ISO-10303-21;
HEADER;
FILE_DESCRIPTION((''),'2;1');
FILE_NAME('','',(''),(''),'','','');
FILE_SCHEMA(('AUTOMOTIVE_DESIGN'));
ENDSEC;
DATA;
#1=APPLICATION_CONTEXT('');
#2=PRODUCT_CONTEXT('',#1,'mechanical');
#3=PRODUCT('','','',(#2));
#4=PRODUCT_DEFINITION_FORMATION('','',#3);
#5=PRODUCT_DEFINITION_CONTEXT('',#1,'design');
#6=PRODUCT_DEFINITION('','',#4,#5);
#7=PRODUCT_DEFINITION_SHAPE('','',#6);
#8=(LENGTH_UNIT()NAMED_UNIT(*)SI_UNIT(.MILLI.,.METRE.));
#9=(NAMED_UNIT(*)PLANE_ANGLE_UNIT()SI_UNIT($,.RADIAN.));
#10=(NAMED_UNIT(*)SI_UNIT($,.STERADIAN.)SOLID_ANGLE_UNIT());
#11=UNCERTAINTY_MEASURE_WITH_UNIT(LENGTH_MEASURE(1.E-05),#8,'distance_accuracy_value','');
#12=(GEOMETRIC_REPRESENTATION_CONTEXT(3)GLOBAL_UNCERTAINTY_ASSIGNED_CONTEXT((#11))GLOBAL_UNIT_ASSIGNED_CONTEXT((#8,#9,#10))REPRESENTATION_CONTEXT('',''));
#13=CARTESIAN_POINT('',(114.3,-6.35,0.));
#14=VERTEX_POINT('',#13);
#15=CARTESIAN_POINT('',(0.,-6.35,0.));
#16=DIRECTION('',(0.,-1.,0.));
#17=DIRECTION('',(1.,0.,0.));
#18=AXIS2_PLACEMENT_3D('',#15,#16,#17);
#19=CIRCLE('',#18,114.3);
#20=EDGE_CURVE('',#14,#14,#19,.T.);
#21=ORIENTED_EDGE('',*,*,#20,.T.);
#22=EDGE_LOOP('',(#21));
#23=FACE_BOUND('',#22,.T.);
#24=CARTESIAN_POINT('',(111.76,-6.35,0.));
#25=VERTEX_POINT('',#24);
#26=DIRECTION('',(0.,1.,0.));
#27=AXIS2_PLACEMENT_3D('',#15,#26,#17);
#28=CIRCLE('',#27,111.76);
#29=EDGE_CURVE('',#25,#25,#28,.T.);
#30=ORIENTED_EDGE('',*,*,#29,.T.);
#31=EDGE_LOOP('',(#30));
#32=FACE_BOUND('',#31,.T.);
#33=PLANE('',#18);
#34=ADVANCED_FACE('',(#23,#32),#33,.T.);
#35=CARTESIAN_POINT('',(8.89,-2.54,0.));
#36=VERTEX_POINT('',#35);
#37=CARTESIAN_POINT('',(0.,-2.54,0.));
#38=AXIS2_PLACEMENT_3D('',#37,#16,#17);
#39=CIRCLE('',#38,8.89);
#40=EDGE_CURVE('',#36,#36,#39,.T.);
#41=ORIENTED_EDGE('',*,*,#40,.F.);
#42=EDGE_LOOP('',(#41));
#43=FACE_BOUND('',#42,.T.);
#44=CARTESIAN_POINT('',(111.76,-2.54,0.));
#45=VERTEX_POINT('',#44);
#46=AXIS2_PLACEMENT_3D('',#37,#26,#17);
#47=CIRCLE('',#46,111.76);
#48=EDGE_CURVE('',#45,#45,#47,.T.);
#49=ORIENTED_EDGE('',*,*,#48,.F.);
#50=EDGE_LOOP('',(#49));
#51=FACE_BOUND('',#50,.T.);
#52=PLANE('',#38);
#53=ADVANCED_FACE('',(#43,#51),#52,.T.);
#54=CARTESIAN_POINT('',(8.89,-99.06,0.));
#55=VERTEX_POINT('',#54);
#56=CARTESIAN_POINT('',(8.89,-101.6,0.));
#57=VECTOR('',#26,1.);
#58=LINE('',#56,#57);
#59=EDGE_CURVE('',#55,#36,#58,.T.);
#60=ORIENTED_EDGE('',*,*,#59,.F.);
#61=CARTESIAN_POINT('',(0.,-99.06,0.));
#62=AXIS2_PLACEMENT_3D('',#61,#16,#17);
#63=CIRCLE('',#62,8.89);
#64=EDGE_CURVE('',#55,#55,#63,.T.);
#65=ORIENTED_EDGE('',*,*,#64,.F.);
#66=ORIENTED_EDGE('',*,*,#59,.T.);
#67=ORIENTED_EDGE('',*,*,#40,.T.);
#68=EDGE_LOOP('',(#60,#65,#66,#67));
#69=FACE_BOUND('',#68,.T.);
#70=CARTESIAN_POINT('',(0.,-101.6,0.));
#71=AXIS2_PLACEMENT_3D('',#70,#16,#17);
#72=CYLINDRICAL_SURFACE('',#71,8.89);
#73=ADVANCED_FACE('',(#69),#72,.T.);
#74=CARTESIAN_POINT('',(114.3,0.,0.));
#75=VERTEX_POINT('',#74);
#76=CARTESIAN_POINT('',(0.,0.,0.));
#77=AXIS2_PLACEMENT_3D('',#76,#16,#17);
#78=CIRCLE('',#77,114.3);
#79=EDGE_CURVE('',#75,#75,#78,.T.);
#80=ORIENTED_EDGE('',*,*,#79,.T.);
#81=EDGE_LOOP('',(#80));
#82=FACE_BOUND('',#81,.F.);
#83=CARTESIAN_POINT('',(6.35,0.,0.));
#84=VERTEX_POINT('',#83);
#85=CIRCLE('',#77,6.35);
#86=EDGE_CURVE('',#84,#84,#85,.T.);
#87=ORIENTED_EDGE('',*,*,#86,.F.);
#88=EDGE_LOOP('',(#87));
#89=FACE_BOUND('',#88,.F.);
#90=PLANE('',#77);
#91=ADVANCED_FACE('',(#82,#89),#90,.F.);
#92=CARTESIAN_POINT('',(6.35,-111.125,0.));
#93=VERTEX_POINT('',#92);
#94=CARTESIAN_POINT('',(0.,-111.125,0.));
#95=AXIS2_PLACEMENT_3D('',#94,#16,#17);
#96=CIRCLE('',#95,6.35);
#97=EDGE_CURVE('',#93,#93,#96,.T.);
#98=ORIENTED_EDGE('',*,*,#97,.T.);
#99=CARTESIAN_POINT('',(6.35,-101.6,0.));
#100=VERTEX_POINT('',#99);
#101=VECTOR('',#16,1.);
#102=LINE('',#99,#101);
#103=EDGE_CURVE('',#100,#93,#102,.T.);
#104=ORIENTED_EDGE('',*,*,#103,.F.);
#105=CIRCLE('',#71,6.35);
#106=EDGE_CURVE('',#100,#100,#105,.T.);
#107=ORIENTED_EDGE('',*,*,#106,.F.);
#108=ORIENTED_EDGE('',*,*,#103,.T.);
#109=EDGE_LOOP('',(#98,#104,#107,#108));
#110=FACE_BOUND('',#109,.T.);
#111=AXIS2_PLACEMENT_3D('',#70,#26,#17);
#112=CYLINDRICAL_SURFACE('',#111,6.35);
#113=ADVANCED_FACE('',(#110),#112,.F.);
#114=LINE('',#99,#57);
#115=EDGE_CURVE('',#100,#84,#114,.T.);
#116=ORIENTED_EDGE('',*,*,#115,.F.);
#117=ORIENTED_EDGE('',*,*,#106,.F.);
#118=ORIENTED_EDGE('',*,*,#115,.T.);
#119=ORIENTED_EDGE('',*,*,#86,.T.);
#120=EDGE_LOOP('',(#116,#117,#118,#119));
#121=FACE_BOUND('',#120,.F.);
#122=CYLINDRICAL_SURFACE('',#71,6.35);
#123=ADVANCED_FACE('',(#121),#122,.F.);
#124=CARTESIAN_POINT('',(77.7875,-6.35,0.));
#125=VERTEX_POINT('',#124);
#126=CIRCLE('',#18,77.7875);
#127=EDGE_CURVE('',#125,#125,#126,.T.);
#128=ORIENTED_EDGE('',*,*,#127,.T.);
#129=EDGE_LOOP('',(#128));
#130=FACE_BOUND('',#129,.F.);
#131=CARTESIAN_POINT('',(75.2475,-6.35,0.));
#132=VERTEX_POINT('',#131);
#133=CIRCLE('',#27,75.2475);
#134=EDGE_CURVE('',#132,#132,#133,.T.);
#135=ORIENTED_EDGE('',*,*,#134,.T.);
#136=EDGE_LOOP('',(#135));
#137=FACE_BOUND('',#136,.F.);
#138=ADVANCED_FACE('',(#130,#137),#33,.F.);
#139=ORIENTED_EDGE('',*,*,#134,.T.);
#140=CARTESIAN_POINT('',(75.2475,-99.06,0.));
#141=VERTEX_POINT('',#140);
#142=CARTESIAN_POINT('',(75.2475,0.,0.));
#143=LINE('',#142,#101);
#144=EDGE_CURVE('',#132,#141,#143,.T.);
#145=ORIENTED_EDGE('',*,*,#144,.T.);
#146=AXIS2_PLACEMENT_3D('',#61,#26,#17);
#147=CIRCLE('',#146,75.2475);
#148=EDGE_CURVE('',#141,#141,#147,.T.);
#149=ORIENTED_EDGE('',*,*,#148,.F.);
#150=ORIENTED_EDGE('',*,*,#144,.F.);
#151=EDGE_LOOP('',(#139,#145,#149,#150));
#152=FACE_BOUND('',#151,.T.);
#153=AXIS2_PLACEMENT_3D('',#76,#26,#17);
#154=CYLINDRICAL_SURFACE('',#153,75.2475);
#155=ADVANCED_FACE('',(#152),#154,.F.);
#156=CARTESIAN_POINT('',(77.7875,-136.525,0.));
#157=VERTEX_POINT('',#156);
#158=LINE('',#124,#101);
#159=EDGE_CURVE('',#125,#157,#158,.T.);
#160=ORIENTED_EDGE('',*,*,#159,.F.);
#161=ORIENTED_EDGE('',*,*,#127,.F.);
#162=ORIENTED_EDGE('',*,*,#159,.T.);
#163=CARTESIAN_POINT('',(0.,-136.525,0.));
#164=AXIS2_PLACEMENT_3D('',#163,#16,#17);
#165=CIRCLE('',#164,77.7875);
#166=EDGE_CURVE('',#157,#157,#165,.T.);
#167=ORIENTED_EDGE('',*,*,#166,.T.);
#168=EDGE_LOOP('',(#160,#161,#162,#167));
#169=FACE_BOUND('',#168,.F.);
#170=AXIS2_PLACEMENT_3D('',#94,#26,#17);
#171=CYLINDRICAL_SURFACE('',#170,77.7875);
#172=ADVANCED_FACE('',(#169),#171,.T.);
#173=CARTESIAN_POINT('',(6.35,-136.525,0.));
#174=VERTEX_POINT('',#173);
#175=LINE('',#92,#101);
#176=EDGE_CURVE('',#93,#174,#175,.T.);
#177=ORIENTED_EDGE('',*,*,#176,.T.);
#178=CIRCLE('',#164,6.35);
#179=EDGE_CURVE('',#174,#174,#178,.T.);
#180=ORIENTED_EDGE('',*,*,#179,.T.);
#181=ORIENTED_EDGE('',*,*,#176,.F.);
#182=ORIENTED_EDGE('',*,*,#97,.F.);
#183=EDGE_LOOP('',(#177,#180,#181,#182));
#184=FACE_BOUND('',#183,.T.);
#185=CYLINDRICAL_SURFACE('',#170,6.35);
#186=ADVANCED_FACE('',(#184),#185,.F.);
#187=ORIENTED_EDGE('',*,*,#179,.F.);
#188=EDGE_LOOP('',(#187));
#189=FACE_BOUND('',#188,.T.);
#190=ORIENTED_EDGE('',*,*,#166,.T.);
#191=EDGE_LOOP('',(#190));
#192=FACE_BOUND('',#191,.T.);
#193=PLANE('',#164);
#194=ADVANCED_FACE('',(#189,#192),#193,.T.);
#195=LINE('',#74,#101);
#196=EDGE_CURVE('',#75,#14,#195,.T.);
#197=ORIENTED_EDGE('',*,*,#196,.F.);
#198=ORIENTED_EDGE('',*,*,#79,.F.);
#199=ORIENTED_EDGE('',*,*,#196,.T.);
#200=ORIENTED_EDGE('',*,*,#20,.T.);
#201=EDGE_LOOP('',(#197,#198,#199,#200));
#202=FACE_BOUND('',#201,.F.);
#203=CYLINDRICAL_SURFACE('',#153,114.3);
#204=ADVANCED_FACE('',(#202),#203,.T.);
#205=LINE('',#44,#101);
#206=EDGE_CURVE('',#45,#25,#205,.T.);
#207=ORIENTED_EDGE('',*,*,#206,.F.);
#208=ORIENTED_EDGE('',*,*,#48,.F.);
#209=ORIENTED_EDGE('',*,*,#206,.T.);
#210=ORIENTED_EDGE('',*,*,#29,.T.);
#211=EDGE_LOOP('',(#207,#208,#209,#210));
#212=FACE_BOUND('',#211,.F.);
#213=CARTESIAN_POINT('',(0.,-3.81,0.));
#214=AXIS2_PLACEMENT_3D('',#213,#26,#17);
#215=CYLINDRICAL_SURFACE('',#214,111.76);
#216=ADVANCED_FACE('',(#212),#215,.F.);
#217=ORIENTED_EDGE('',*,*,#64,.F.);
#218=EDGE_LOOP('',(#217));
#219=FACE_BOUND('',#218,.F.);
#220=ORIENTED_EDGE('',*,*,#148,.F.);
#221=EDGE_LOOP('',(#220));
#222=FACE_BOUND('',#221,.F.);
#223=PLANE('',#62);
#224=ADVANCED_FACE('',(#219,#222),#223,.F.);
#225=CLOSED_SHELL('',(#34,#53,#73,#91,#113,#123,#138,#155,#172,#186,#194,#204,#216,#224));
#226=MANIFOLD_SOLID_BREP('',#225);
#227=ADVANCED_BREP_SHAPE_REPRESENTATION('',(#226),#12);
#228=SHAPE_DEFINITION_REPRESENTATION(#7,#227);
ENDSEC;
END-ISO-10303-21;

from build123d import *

# Parameters (mm, degrees)
F0_R     = 114.3
F0_R_2   = 77.7875
F1_DEPTH = 6.35
F2_DEPTH = 203.2
F3_DEPTH = 101.6
F4_R     = 6.35
F5_DEPTH = 101.601
F6_T     = -2.54
F7_DEPTH = 9.525
F8_DEPTH = 25.4


# Not quite as in the source:
# - a shell that OpenCascade refuses in one call is made with other operations: the cavity is built on its own and cut out


with BuildPart() as f1:
    # F0 (on Front) → F1 (new body)
    with BuildSketch(Plane.XZ):
        Circle(F0_R)
        Circle(F0_R_2, mode=Mode.SUBTRACT)
    extrude(amount=F1_DEPTH)

    # F0 (on Front) → F2 (join)
    with BuildSketch(Plane.XZ):
        Circle(F0_R_2)
    extrude(amount=F2_DEPTH)

    # F3 (cut): a face of the model
    f3_faces = [f1.faces().sort_by_distance(p)[0] for p in [
        (0, -203.2, 0),
    ]]
    extrude(f3_faces, amount=-F3_DEPTH, mode=Mode.SUBTRACT)

    # F4 (on face) → F5 (cut, through all)
    with BuildSketch(Plane.XZ.offset(101.6)):
        Circle(F4_R)
    extrude(amount=-F5_DEPTH, mode=Mode.SUBTRACT)

    # F6: a shell. OpenCascade refuses it in one call, so the cavity is built on its own and cut out:
    # the body offset inwards by the wall thickness, plus a prism from it out through each open face.
    f6_core = offset(f1.part, amount=F6_T, kind=Kind.INTERSECTION, mode=Mode.PRIVATE)
    f6_exits = [f6_core.faces().sort_by_distance(p)[0] for p in [
        (-78.40855, -3.81, 0),
    ]]
    add(f6_core, mode=Mode.SUBTRACT)
    extrude(f6_exits, amount=-F6_T, mode=Mode.SUBTRACT)

    # F7 (add): a face of the model
    f7_faces = [f1.faces().sort_by_distance(p)[0] for p in [
        (-75.5873372503, -101.6, 0),
    ]]
    extrude(f7_faces, amount=F7_DEPTH)

    # F8 (add): a face of the model
    f8_faces = [f1.faces().sort_by_distance(p)[0] for p in [
        (-75.5873372503, -111.125, 0),
    ]]
    extrude(f8_faces, amount=F8_DEPTH)


solid = f1.part
